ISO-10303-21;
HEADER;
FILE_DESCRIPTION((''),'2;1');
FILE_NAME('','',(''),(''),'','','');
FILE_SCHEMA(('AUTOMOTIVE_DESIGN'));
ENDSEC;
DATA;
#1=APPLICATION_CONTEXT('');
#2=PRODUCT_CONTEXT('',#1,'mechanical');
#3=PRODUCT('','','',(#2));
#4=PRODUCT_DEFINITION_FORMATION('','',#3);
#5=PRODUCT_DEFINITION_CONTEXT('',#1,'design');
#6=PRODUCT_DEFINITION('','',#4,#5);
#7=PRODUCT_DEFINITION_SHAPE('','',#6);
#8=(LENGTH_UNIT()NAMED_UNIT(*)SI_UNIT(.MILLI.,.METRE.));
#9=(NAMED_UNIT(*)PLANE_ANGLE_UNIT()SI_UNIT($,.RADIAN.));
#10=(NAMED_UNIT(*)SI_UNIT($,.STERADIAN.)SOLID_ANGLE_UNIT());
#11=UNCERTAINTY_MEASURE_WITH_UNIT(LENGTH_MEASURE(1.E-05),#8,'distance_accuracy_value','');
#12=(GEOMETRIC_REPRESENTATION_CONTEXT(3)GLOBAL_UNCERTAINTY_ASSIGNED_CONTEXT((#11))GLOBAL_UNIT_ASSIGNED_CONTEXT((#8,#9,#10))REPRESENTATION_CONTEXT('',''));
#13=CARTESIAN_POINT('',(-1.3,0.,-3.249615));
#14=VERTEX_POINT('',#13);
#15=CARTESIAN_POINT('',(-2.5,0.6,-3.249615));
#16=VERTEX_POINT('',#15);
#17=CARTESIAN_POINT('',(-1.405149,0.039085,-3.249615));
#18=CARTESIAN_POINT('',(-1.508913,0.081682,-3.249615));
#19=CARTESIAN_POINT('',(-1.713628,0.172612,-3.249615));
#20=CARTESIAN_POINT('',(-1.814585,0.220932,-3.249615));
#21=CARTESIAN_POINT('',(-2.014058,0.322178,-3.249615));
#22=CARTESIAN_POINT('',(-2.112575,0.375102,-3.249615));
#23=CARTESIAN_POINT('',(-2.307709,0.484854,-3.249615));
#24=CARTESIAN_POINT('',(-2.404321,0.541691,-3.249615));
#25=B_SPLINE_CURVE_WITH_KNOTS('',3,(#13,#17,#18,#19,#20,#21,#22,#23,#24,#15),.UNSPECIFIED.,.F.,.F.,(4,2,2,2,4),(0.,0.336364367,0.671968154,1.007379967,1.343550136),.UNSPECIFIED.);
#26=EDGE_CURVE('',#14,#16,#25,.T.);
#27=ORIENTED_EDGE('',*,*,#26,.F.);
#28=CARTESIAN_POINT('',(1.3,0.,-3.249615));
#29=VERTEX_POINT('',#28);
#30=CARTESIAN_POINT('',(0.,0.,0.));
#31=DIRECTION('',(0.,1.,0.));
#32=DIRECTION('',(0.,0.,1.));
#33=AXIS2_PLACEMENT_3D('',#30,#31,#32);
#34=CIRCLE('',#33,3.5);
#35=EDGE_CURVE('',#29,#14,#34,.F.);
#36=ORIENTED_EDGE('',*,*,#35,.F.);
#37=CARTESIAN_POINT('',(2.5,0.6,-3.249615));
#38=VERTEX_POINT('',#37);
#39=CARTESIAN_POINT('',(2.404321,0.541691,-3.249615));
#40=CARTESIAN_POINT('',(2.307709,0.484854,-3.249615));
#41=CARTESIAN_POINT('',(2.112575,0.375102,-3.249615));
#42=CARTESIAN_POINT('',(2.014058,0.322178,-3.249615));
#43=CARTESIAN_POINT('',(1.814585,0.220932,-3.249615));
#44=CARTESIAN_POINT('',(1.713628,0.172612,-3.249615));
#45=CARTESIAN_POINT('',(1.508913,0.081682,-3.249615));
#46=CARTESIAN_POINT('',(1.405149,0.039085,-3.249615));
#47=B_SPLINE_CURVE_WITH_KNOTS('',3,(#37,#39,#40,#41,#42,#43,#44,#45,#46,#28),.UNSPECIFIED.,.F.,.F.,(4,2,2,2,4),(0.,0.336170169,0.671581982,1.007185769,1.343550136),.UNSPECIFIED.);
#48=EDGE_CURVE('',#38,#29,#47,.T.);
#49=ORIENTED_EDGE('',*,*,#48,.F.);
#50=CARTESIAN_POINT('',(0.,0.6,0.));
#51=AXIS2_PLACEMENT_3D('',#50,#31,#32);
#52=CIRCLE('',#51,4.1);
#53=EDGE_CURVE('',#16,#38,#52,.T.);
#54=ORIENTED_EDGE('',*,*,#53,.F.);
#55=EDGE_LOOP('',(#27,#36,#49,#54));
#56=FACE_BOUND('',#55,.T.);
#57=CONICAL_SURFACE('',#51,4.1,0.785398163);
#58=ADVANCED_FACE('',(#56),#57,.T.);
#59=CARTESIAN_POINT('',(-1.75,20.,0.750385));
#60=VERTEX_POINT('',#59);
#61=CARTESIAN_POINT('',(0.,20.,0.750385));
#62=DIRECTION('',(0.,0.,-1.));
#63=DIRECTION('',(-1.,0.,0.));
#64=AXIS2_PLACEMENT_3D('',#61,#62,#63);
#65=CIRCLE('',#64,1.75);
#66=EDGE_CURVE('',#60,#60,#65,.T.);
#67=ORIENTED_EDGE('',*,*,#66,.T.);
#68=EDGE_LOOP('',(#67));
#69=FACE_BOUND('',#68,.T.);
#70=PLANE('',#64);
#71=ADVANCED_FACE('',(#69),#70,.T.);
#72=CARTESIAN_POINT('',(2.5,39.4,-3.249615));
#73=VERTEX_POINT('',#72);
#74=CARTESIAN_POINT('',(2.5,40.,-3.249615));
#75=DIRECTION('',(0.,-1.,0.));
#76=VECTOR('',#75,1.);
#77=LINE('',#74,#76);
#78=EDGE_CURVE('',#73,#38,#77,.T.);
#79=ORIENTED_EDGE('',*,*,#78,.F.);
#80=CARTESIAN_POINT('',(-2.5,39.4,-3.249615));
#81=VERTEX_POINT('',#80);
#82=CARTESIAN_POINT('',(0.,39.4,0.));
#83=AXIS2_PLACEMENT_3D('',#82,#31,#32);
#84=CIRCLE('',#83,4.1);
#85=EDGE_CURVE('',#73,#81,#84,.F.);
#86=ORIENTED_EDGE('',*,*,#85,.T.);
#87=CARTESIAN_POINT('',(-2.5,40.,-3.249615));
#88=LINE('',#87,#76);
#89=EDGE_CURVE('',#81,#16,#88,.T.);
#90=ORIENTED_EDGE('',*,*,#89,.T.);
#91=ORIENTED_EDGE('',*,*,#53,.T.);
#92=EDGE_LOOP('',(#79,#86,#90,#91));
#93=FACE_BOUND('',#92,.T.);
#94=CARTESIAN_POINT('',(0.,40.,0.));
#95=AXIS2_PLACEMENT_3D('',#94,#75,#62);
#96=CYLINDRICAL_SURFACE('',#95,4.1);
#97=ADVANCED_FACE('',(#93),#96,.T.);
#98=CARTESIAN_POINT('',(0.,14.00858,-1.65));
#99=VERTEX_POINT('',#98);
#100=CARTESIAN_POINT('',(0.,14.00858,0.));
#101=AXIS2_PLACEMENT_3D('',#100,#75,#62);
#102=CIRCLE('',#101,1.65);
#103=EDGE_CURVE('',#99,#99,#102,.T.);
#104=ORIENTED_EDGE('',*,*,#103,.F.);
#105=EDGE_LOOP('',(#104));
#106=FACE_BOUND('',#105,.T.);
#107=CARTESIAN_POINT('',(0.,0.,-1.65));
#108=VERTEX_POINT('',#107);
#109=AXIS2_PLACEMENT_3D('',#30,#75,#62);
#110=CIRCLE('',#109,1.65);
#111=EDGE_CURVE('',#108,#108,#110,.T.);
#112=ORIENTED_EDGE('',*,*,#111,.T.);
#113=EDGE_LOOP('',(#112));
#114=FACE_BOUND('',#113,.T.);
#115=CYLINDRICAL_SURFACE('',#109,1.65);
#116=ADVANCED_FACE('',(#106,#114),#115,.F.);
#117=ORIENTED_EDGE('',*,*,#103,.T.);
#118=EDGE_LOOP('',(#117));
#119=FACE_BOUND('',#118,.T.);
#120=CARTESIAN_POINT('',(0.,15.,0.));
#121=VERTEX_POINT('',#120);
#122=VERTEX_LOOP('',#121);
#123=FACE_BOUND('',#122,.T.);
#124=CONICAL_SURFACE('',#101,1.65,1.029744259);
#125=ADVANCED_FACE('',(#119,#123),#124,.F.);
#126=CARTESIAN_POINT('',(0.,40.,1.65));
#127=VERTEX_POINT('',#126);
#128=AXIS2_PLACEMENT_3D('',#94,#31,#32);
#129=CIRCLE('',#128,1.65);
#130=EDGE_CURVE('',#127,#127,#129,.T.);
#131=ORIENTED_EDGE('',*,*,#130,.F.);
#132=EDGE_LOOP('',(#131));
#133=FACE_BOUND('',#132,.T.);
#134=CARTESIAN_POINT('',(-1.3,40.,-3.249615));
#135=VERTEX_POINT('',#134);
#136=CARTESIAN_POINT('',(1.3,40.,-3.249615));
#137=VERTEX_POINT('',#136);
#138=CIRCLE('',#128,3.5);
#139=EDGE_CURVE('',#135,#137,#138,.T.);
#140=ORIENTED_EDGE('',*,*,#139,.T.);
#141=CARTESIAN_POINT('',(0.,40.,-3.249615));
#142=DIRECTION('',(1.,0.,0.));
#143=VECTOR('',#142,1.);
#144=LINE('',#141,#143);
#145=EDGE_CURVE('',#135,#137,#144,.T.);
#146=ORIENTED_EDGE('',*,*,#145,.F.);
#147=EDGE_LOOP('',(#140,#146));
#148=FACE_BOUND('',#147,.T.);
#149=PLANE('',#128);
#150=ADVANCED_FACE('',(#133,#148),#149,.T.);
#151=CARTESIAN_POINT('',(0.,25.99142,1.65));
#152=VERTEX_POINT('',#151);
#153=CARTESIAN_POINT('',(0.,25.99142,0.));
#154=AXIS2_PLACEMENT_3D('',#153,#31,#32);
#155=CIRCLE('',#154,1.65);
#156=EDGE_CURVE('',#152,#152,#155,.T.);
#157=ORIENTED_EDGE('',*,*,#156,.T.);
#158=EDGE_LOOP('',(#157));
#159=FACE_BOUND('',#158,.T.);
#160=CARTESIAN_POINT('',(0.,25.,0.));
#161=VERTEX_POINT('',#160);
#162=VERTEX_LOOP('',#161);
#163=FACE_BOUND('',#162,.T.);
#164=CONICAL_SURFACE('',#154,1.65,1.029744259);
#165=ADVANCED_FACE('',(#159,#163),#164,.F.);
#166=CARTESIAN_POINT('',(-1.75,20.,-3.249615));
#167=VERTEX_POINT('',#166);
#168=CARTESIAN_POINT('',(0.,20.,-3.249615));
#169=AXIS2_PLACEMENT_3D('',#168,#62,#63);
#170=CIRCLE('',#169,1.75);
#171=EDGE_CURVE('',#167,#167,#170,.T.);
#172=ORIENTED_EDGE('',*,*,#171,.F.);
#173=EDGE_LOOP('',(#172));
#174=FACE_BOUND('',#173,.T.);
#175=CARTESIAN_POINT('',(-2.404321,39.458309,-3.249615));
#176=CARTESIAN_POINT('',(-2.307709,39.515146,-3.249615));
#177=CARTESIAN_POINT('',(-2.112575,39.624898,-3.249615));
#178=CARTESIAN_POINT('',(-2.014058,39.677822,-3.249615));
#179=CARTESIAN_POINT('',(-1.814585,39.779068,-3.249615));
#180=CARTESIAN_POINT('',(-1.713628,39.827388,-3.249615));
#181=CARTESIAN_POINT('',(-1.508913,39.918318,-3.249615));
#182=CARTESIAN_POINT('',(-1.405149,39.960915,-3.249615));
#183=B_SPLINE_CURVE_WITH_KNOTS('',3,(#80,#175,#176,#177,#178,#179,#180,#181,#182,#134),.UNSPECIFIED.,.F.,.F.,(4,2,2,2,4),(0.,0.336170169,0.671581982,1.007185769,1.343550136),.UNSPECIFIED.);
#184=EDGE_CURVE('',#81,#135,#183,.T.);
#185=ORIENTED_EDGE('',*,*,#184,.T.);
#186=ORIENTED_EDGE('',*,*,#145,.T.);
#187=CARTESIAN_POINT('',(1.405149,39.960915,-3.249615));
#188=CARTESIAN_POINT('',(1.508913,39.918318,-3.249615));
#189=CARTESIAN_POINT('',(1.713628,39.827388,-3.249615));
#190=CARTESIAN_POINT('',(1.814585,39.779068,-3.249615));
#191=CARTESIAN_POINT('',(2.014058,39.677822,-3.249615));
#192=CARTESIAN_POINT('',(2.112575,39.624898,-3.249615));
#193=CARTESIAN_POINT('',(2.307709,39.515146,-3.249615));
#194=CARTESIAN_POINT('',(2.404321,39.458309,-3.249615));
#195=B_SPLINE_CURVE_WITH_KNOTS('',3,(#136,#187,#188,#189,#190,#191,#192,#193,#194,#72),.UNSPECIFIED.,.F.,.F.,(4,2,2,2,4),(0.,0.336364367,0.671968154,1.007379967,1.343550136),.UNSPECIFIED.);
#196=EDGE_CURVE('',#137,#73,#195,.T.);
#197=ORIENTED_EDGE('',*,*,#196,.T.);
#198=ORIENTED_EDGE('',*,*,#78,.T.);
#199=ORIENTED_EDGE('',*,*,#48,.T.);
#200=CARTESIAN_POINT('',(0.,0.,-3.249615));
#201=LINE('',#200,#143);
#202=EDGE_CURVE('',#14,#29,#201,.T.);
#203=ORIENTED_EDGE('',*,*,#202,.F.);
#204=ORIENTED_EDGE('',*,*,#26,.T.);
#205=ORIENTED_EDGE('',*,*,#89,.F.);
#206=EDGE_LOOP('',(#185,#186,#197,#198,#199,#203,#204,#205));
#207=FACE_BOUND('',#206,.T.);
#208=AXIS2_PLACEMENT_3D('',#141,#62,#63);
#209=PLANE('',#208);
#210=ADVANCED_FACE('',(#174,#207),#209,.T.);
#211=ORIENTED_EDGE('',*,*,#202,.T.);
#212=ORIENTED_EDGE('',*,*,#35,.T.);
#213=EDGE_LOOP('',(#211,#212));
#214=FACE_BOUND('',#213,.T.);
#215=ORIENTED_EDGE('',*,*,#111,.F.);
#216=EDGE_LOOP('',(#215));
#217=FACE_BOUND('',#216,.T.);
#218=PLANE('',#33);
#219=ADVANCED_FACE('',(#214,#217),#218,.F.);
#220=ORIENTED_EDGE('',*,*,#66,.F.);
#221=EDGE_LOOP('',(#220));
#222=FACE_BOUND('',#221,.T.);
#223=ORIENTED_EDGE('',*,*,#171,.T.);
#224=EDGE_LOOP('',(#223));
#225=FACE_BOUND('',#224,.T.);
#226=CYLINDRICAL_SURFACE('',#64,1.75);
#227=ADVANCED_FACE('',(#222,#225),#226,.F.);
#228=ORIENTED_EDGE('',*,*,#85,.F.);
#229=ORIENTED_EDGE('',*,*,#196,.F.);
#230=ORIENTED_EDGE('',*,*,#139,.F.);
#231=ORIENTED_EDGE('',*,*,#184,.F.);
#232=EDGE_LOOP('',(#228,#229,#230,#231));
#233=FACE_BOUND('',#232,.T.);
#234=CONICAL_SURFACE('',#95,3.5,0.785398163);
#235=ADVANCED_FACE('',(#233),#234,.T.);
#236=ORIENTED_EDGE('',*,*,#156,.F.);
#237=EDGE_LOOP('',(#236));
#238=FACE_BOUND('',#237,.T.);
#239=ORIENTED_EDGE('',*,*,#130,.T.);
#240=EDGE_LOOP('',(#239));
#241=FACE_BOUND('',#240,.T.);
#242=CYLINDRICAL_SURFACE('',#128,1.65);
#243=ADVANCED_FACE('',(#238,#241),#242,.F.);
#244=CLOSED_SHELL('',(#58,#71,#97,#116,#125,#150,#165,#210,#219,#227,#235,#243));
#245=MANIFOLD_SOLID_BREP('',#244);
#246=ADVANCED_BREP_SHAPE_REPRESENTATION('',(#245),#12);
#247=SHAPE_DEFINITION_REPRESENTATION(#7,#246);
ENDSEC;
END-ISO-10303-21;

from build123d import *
from OCP.BRepAlgoAPI import BRepAlgoAPI_Cut
from OCP.TopTools import TopTools_ListOfShape

# Parameters (mm, degrees)
BOSS_EXTRUDE2_DEPTH       = 40
CUT_EXTRUDE1_START        = -7.349615
SKETCH2_R                 = 1.75
CUT_EXTRUDE1_DEPTH        = 4
F_1_0MM_DOWEL_HOLE1_D     = 3.3
F_1_0MM_DOWEL_HOLE1_DEPTH = 14.008579979
F_1_0MM_DOWEL_HOLE1_TIP   = 0.991420021
F_1_0MM_DOWEL_HOLE2_D     = 3.3
F_1_0MM_DOWEL_HOLE2_DEPTH = 14.008579979
F_1_0MM_DOWEL_HOLE2_TIP   = 0.991420021
CHAMFER1_SIZE             = 0.6
CHAMFER2_SIZE             = 0.6


with BuildPart() as part:
    # Sketch1 → Boss-Extrude2 (new body)
    with BuildSketch(Plane(origin=(0, 0, 0), x_dir=(1, 0, 0), z_dir=(0, 1, 0))):
        with BuildLine():
            Line((2.5, 3.249615362), (-2.5, 3.249615362))
            ThreePointArc((-2.5, 3.249615362), (0, -4.1), (2.5, 3.249615362))
        make_face()
    extrude(amount=BOSS_EXTRUDE2_DEPTH)


with BuildPart() as cut_extrude1_tool:
    # Sketch2 → Cut-Extrude1 (new body)
    with BuildSketch(Plane.XY.offset(4.1).offset(CUT_EXTRUDE1_START)):
        with Locations(Location((0, 20, 0), (0, 0, 180))):
            Circle(SKETCH2_R)
    extrude(amount=CUT_EXTRUDE1_DEPTH)


with BuildPart() as part_1:
    add(part.part)

    # Cut-Extrude1: cut by cut_extrude1_tool, with a tolerance
    cut_extrude1_stock = TopTools_ListOfShape()
    cut_extrude1_stock.Append(part_1.part.wrapped)
    cut_extrude1_tools = TopTools_ListOfShape()
    cut_extrude1_tools.Append(cut_extrude1_tool.part.wrapped)
    cut_extrude1_cut = BRepAlgoAPI_Cut()
    cut_extrude1_cut.SetArguments(cut_extrude1_stock)
    cut_extrude1_cut.SetTools(cut_extrude1_tools)
    cut_extrude1_cut.SetFuzzyValue(0.00001)
    cut_extrude1_cut.Build()
    add(Compound.cast(cut_extrude1_cut.Shape()).solids(), mode=Mode.REPLACE)

    # Ø1.0mm Dowel Hole1
    with Locations(Plane(origin=(0, 40, 0), x_dir=(1, 0, 0), z_dir=(0, 1, 0))):
        with Locations((0, 0)):
            Hole(F_1_0MM_DOWEL_HOLE1_D / 2, depth=F_1_0MM_DOWEL_HOLE1_DEPTH)
            with Locations((0, 0, -(F_1_0MM_DOWEL_HOLE1_DEPTH + F_1_0MM_DOWEL_HOLE1_TIP / 2))):  # 118° drill point
                Cone(0, F_1_0MM_DOWEL_HOLE1_D / 2, F_1_0MM_DOWEL_HOLE1_TIP, mode=Mode.SUBTRACT)

    # Ø1.0mm Dowel Hole2
    with Locations(Plane(origin=(0, 0, 0), x_dir=(-1, 0, 0), z_dir=(0, -1, 0))):
        with Locations((0, 0)):
            Hole(F_1_0MM_DOWEL_HOLE2_D / 2, depth=F_1_0MM_DOWEL_HOLE2_DEPTH)
            with Locations((0, 0, -(F_1_0MM_DOWEL_HOLE2_DEPTH + F_1_0MM_DOWEL_HOLE2_TIP / 2))):  # 118° drill point
                Cone(0, F_1_0MM_DOWEL_HOLE2_D / 2, F_1_0MM_DOWEL_HOLE2_TIP, mode=Mode.SUBTRACT)

    # Chamfer1
    chamfer1_edges = [part_1.edges().sort_by_distance(p)[0] for p in [
        (0, 40, 4.1),
    ]]
    chamfer(chamfer1_edges, length=CHAMFER1_SIZE)

    # Chamfer2
    chamfer2_edges = [part_1.edges().sort_by_distance(p)[0] for p in [
        (0, 0, 4.1),
    ]]
    chamfer(chamfer2_edges, length=CHAMFER2_SIZE)


solid = part_1.part
